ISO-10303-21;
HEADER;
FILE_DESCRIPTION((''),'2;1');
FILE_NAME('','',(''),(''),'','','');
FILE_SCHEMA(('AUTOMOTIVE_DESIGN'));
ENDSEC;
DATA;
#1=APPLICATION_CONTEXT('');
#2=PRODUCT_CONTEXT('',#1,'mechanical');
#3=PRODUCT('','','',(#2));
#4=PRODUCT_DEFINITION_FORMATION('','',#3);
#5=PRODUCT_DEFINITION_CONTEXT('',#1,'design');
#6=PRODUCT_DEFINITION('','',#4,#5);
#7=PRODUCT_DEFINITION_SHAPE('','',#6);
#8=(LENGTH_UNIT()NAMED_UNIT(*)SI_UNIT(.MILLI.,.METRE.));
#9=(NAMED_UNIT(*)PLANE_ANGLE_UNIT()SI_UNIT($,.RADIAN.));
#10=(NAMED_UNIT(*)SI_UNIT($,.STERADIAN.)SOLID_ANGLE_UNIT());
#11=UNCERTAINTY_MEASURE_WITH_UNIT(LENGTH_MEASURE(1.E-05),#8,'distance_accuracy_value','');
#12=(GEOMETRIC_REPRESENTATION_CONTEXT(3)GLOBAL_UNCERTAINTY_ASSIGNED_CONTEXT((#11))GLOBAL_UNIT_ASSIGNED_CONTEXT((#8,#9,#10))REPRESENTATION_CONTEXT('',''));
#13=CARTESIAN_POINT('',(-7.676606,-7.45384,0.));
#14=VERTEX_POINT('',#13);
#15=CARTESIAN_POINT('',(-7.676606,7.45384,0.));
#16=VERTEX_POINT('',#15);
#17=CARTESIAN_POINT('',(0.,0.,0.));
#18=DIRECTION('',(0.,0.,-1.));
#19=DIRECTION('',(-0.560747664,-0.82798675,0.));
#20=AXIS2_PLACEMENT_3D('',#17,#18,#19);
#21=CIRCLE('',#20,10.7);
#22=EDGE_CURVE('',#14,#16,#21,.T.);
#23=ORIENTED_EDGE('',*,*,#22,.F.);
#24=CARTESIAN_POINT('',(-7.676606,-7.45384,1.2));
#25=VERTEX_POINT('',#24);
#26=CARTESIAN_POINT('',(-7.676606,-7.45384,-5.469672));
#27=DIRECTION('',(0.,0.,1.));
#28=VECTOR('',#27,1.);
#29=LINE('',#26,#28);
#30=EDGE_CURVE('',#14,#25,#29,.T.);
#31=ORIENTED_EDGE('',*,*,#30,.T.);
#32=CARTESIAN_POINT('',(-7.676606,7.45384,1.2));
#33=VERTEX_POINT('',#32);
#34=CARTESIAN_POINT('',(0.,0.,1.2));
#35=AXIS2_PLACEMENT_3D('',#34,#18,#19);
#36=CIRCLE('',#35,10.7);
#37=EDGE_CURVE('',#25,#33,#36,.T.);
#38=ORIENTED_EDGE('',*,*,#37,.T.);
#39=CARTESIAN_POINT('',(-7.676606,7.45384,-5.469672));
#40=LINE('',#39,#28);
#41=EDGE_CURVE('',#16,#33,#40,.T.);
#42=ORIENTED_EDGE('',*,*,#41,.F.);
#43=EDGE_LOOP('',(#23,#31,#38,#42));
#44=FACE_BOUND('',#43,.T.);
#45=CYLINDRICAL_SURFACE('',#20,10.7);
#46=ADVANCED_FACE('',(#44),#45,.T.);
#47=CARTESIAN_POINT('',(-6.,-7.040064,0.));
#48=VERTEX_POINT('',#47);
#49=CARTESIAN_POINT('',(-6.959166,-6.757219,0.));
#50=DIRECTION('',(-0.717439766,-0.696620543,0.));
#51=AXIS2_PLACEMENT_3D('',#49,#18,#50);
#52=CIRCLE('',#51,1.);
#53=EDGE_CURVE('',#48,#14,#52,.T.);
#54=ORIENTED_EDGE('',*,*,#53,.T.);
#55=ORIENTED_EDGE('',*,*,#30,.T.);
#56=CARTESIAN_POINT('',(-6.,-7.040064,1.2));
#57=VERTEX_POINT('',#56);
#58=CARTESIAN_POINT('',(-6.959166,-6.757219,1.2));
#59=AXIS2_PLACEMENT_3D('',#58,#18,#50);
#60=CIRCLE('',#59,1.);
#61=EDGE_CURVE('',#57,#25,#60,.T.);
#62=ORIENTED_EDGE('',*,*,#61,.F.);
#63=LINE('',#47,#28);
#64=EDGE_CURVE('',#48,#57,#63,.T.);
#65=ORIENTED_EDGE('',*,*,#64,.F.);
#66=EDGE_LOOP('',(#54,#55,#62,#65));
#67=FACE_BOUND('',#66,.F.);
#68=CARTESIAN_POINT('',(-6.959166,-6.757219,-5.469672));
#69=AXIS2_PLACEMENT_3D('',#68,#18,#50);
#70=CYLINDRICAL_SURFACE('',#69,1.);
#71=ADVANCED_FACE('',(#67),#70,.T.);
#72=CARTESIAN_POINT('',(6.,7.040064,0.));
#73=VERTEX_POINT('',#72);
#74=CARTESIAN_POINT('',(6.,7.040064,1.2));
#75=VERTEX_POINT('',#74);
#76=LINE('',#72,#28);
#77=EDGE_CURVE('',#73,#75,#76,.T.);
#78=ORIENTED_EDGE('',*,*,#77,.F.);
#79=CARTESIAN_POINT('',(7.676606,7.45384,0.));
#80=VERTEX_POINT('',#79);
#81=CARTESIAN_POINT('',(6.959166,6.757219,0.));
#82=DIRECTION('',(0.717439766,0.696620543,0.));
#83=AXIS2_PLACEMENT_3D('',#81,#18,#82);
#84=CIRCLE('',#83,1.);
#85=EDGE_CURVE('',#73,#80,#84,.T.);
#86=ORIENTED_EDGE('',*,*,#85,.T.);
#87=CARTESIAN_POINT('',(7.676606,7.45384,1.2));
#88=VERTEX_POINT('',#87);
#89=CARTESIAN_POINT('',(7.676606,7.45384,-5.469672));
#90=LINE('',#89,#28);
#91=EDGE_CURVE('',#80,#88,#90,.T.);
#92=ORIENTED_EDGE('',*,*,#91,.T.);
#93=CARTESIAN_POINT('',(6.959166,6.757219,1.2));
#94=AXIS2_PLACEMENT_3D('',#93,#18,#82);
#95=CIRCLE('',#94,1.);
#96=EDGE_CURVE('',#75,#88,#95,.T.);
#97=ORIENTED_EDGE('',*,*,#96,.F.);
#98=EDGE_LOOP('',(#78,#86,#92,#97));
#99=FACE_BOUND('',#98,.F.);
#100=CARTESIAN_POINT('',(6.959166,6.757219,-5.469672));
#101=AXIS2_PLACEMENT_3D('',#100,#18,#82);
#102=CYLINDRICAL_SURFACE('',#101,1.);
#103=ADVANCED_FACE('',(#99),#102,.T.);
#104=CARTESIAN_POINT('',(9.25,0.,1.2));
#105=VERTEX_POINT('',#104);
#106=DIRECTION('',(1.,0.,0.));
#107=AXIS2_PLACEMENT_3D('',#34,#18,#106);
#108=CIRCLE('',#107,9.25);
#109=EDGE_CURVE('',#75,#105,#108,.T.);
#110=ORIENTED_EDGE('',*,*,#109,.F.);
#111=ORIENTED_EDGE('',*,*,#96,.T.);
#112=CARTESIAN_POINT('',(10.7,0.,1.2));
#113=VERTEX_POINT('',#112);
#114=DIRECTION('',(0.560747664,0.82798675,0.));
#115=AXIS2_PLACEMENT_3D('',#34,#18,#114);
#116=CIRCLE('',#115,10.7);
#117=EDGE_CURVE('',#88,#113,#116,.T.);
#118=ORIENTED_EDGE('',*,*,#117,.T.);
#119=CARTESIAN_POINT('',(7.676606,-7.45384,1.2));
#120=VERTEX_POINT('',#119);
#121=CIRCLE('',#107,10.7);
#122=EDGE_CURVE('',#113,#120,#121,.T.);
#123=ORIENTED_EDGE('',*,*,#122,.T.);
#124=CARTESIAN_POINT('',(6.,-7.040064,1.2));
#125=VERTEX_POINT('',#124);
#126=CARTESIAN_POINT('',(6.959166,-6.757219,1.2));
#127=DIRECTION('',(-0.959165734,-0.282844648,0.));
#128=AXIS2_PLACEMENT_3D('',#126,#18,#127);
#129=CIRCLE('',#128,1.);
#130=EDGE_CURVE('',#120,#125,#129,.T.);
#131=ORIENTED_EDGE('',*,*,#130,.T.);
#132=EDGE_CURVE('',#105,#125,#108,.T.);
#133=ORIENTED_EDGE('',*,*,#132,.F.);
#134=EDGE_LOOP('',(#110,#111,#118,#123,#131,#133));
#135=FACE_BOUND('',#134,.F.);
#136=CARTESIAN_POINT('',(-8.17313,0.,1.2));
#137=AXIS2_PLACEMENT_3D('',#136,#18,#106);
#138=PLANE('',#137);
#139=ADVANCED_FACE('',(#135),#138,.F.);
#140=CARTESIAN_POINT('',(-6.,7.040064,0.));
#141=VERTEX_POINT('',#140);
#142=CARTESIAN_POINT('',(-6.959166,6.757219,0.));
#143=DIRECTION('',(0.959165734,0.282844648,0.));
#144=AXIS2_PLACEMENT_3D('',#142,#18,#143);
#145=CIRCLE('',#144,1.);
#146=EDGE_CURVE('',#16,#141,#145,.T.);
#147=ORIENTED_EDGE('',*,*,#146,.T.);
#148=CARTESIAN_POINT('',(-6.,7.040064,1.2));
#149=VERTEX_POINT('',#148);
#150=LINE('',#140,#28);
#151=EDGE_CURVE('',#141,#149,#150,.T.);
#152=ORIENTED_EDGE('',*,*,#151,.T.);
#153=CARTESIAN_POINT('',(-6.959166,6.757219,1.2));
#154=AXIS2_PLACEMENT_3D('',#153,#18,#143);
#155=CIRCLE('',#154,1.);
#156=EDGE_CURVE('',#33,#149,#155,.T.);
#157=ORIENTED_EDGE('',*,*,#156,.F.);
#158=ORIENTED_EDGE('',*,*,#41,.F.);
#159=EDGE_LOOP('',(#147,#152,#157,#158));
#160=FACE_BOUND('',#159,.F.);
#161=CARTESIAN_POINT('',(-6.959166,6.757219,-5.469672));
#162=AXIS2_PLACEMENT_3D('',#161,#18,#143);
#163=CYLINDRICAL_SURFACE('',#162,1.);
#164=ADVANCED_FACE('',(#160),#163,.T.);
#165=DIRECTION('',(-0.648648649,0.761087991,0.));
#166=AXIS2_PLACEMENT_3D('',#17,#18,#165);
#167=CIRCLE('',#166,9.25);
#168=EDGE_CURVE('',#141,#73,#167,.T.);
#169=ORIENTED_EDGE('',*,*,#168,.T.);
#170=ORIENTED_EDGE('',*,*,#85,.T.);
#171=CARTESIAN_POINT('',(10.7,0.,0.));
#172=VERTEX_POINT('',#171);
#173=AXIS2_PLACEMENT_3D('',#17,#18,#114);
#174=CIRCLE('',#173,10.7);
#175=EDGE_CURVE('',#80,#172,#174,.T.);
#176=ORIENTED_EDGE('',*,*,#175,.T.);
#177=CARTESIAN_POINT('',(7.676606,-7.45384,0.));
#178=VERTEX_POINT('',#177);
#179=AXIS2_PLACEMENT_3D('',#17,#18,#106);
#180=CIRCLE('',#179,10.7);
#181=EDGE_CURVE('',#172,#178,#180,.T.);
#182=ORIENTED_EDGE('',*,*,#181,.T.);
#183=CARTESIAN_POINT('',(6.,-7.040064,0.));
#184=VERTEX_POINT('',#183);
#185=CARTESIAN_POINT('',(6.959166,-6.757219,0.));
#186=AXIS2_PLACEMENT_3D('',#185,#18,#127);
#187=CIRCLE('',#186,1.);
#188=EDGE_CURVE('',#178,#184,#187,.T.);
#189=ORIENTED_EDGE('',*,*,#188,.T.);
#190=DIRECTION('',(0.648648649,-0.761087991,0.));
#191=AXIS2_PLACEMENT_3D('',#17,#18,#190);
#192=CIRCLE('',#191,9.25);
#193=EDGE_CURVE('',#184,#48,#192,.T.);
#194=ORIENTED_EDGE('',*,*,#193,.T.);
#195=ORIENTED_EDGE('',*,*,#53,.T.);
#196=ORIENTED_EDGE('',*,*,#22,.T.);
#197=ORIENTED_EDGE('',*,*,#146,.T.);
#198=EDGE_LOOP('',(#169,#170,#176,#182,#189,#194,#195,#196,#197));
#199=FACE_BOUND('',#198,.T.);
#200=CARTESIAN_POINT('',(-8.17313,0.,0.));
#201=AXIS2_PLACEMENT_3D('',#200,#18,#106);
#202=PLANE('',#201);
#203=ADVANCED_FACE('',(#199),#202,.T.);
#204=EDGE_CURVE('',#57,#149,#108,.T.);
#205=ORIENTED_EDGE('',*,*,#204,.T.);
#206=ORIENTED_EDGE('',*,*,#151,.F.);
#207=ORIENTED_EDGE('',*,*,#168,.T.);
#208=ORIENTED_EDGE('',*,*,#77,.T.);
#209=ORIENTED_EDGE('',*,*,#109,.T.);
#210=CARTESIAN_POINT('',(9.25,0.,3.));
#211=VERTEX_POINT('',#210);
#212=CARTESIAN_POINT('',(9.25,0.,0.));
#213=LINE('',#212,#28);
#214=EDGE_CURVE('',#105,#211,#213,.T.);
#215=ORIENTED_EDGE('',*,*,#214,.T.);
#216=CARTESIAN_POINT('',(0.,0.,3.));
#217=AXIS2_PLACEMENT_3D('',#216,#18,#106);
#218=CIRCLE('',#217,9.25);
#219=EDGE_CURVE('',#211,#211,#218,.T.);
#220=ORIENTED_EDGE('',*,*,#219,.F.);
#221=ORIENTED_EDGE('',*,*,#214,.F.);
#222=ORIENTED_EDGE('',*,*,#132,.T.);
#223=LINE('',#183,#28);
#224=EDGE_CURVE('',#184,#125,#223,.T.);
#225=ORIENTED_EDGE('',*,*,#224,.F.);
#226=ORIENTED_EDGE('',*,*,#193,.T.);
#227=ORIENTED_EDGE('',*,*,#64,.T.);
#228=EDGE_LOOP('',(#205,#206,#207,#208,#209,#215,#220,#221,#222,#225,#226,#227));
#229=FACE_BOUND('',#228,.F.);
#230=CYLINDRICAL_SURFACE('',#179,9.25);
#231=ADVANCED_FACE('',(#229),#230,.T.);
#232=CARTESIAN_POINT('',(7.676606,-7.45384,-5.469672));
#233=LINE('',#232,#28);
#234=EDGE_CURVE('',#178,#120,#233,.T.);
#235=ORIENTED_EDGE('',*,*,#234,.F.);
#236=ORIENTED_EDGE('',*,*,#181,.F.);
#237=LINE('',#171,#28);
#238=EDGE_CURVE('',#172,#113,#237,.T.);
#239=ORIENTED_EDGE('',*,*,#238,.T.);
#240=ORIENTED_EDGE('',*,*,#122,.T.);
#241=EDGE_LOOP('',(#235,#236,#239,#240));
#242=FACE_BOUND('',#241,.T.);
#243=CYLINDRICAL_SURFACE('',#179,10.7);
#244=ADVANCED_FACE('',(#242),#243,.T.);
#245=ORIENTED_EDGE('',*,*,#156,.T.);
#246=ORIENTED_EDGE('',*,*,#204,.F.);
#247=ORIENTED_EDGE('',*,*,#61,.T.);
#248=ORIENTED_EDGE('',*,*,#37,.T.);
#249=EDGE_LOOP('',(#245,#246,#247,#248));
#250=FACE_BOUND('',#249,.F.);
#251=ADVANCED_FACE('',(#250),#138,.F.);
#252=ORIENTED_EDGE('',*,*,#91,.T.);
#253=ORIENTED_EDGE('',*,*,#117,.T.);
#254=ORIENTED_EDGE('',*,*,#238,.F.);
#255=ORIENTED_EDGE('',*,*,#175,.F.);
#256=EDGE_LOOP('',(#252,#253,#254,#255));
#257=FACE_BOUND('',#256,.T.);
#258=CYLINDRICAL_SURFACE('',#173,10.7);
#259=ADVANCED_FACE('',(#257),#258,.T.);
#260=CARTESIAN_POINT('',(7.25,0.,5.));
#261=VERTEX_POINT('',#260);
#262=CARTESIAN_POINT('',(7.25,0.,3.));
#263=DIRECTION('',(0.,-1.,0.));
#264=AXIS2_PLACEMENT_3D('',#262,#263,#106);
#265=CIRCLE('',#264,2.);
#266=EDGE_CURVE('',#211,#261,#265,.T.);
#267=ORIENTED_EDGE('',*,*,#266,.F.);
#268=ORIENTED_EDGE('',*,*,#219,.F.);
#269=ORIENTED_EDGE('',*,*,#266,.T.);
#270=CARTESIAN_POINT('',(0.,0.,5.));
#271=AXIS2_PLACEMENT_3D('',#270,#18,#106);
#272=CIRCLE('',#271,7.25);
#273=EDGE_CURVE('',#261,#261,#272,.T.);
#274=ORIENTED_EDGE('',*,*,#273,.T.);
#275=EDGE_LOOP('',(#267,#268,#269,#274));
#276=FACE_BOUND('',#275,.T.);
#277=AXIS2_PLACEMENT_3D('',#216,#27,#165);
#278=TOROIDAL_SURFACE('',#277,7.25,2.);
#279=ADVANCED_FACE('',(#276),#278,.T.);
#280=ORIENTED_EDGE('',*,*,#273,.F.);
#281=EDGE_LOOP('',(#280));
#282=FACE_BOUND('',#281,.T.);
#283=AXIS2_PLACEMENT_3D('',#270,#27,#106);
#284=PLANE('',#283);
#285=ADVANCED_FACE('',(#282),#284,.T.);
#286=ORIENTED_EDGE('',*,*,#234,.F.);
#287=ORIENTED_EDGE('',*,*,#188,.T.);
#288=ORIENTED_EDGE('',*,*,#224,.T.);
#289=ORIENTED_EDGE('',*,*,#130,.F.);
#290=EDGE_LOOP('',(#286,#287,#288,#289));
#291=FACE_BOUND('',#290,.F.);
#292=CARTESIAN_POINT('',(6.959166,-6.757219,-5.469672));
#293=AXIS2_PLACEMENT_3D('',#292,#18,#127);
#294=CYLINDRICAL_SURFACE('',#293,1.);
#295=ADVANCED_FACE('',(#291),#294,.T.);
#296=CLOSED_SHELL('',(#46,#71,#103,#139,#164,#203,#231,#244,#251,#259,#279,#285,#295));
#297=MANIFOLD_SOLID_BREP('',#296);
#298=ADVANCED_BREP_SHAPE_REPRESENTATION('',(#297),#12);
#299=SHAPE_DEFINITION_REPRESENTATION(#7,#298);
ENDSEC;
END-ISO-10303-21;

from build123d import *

# Parameters (mm, degrees)
F0_R        = 9.25
F1_DEPTH    = 5
F3_DEPTH    = 1.2
F4_T1_DEPTH = 12.1393431135
F5_R        = 2


# Not quite as in the source:
# - a fillet or chamfer that OpenCascade refuses, or shapes differently, is made with other operations: its cross-section is extruded or revolved along the edge and cut away or added


with BuildPart() as f1:
    # F0 (on Top) → F1 (new body)
    with BuildSketch(Plane.XY):
        Circle(F0_R)
    extrude(amount=F1_DEPTH)

    # F2 (on face) → F3 (join)
    with BuildSketch(Plane(origin=(0, 0, 0), x_dir=(1, 0, 0), z_dir=(0, 0, -1))):
        with BuildLine():
            Line((-6, 7.0400639202), (-6, 8.8594582227))
            ThreePointArc((-6, 8.8594582227), (-10.7, 0), (-6, -8.8594582227))
            Line((-6, -8.8594582227), (-6, -7.0400639202))
            ThreePointArc((-6, -7.0400639202), (-9.25, 0), (-6, 7.0400639202))
        make_face()
        with BuildLine():
            Line((-6, -7.0400639202), (-6, 7.0400639202))
            ThreePointArc((-6, 7.0400639202), (-9.25, 0), (-6, -7.0400639202))
        make_face()
        with BuildLine():
            Line((6, -7.0400639202), (6, 7.0400639202))
            ThreePointArc((6, 7.0400639202), (0, 9.25), (-6, 7.0400639202))
            Line((-6, 7.0400639202), (-6, -7.0400639202))
            ThreePointArc((-6, -7.0400639202), (0, -9.25), (6, -7.0400639202))
        make_face()
        with BuildLine():
            ThreePointArc((9.25, 0), (8.3982885161, 3.8770156048), (6, 7.0400639202))
            Line((6, 7.0400639202), (6, -7.0400639202))
            ThreePointArc((6, -7.0400639202), (8.3982885161, -3.8770156048), (9.25, 0))
        make_face()
        with BuildLine():
            ThreePointArc((6, -8.8594582227), (9.4522484098, -5.0144790358), (10.7, 0))
            ThreePointArc((10.7, 0), (9.4522484098, 5.0144790358), (6, 8.8594582227))
            Line((6, 8.8594582227), (6, 7.0400639202))
            ThreePointArc((6, 7.0400639202), (8.3982885161, 3.8770156048), (9.25, 0))
            ThreePointArc((9.25, 0), (8.3982885161, -3.8770156048), (6, -7.0400639202))
            Line((6, -7.0400639202), (6, -8.8594582227))
        make_face()
    extrude(amount=-F3_DEPTH)

    # F4: fillet of radius 1 on 4 edges, made by hand

    # F4_s2 → F4_t1 (cut)
    with BuildSketch(Plane.XY.offset(-5.4696715568)):
        with BuildLine():
            ThreePointArc((6, -7.0400639202), (6.7195608847, -7.728089766), (7.6766055002, -7.4538398154))
            ThreePointArc((7.6766055002, -7.4538398154), (6.8743236234, -8.1996143032), (6, -8.8594582227))
            Line((6, -8.8594582227), (6, -7.0400639202))
        make_face()
        with BuildLine():
            ThreePointArc((-7.6766055002, -7.4538398154), (-6.7195608847, -7.728089766), (-6, -7.0400639202))
            Line((-6, -7.0400639202), (-6, -8.8594582227))
            ThreePointArc((-6, -8.8594582227), (-6.8743236234, -8.1996143032), (-7.6766055002, -7.4538398154))
        make_face()
        with BuildLine():
            ThreePointArc((7.6766055002, 7.4538398154), (6.7195608847, 7.728089766), (6, 7.0400639202))
            Line((6, 7.0400639202), (6, 8.8594582227))
            ThreePointArc((6, 8.8594582227), (6.8743236234, 8.1996143032), (7.6766055002, 7.4538398154))
        make_face()
        with BuildLine():
            ThreePointArc((-6, 7.0400639202), (-6.7195608847, 7.728089766), (-7.6766055002, 7.4538398154))
            ThreePointArc((-7.6766055002, 7.4538398154), (-6.8743236234, 8.1996143032), (-6, 8.8594582227))
            Line((-6, 8.8594582227), (-6, 7.0400639202))
        make_face()
    extrude(amount=F4_T1_DEPTH, mode=Mode.SUBTRACT)

    # F5
    f5_edges = [f1.edges().sort_by_distance(p)[0] for p in [
        (-9.25, 0, 5),
    ]]
    fillet(f5_edges, radius=F5_R)


solid = f1.part
